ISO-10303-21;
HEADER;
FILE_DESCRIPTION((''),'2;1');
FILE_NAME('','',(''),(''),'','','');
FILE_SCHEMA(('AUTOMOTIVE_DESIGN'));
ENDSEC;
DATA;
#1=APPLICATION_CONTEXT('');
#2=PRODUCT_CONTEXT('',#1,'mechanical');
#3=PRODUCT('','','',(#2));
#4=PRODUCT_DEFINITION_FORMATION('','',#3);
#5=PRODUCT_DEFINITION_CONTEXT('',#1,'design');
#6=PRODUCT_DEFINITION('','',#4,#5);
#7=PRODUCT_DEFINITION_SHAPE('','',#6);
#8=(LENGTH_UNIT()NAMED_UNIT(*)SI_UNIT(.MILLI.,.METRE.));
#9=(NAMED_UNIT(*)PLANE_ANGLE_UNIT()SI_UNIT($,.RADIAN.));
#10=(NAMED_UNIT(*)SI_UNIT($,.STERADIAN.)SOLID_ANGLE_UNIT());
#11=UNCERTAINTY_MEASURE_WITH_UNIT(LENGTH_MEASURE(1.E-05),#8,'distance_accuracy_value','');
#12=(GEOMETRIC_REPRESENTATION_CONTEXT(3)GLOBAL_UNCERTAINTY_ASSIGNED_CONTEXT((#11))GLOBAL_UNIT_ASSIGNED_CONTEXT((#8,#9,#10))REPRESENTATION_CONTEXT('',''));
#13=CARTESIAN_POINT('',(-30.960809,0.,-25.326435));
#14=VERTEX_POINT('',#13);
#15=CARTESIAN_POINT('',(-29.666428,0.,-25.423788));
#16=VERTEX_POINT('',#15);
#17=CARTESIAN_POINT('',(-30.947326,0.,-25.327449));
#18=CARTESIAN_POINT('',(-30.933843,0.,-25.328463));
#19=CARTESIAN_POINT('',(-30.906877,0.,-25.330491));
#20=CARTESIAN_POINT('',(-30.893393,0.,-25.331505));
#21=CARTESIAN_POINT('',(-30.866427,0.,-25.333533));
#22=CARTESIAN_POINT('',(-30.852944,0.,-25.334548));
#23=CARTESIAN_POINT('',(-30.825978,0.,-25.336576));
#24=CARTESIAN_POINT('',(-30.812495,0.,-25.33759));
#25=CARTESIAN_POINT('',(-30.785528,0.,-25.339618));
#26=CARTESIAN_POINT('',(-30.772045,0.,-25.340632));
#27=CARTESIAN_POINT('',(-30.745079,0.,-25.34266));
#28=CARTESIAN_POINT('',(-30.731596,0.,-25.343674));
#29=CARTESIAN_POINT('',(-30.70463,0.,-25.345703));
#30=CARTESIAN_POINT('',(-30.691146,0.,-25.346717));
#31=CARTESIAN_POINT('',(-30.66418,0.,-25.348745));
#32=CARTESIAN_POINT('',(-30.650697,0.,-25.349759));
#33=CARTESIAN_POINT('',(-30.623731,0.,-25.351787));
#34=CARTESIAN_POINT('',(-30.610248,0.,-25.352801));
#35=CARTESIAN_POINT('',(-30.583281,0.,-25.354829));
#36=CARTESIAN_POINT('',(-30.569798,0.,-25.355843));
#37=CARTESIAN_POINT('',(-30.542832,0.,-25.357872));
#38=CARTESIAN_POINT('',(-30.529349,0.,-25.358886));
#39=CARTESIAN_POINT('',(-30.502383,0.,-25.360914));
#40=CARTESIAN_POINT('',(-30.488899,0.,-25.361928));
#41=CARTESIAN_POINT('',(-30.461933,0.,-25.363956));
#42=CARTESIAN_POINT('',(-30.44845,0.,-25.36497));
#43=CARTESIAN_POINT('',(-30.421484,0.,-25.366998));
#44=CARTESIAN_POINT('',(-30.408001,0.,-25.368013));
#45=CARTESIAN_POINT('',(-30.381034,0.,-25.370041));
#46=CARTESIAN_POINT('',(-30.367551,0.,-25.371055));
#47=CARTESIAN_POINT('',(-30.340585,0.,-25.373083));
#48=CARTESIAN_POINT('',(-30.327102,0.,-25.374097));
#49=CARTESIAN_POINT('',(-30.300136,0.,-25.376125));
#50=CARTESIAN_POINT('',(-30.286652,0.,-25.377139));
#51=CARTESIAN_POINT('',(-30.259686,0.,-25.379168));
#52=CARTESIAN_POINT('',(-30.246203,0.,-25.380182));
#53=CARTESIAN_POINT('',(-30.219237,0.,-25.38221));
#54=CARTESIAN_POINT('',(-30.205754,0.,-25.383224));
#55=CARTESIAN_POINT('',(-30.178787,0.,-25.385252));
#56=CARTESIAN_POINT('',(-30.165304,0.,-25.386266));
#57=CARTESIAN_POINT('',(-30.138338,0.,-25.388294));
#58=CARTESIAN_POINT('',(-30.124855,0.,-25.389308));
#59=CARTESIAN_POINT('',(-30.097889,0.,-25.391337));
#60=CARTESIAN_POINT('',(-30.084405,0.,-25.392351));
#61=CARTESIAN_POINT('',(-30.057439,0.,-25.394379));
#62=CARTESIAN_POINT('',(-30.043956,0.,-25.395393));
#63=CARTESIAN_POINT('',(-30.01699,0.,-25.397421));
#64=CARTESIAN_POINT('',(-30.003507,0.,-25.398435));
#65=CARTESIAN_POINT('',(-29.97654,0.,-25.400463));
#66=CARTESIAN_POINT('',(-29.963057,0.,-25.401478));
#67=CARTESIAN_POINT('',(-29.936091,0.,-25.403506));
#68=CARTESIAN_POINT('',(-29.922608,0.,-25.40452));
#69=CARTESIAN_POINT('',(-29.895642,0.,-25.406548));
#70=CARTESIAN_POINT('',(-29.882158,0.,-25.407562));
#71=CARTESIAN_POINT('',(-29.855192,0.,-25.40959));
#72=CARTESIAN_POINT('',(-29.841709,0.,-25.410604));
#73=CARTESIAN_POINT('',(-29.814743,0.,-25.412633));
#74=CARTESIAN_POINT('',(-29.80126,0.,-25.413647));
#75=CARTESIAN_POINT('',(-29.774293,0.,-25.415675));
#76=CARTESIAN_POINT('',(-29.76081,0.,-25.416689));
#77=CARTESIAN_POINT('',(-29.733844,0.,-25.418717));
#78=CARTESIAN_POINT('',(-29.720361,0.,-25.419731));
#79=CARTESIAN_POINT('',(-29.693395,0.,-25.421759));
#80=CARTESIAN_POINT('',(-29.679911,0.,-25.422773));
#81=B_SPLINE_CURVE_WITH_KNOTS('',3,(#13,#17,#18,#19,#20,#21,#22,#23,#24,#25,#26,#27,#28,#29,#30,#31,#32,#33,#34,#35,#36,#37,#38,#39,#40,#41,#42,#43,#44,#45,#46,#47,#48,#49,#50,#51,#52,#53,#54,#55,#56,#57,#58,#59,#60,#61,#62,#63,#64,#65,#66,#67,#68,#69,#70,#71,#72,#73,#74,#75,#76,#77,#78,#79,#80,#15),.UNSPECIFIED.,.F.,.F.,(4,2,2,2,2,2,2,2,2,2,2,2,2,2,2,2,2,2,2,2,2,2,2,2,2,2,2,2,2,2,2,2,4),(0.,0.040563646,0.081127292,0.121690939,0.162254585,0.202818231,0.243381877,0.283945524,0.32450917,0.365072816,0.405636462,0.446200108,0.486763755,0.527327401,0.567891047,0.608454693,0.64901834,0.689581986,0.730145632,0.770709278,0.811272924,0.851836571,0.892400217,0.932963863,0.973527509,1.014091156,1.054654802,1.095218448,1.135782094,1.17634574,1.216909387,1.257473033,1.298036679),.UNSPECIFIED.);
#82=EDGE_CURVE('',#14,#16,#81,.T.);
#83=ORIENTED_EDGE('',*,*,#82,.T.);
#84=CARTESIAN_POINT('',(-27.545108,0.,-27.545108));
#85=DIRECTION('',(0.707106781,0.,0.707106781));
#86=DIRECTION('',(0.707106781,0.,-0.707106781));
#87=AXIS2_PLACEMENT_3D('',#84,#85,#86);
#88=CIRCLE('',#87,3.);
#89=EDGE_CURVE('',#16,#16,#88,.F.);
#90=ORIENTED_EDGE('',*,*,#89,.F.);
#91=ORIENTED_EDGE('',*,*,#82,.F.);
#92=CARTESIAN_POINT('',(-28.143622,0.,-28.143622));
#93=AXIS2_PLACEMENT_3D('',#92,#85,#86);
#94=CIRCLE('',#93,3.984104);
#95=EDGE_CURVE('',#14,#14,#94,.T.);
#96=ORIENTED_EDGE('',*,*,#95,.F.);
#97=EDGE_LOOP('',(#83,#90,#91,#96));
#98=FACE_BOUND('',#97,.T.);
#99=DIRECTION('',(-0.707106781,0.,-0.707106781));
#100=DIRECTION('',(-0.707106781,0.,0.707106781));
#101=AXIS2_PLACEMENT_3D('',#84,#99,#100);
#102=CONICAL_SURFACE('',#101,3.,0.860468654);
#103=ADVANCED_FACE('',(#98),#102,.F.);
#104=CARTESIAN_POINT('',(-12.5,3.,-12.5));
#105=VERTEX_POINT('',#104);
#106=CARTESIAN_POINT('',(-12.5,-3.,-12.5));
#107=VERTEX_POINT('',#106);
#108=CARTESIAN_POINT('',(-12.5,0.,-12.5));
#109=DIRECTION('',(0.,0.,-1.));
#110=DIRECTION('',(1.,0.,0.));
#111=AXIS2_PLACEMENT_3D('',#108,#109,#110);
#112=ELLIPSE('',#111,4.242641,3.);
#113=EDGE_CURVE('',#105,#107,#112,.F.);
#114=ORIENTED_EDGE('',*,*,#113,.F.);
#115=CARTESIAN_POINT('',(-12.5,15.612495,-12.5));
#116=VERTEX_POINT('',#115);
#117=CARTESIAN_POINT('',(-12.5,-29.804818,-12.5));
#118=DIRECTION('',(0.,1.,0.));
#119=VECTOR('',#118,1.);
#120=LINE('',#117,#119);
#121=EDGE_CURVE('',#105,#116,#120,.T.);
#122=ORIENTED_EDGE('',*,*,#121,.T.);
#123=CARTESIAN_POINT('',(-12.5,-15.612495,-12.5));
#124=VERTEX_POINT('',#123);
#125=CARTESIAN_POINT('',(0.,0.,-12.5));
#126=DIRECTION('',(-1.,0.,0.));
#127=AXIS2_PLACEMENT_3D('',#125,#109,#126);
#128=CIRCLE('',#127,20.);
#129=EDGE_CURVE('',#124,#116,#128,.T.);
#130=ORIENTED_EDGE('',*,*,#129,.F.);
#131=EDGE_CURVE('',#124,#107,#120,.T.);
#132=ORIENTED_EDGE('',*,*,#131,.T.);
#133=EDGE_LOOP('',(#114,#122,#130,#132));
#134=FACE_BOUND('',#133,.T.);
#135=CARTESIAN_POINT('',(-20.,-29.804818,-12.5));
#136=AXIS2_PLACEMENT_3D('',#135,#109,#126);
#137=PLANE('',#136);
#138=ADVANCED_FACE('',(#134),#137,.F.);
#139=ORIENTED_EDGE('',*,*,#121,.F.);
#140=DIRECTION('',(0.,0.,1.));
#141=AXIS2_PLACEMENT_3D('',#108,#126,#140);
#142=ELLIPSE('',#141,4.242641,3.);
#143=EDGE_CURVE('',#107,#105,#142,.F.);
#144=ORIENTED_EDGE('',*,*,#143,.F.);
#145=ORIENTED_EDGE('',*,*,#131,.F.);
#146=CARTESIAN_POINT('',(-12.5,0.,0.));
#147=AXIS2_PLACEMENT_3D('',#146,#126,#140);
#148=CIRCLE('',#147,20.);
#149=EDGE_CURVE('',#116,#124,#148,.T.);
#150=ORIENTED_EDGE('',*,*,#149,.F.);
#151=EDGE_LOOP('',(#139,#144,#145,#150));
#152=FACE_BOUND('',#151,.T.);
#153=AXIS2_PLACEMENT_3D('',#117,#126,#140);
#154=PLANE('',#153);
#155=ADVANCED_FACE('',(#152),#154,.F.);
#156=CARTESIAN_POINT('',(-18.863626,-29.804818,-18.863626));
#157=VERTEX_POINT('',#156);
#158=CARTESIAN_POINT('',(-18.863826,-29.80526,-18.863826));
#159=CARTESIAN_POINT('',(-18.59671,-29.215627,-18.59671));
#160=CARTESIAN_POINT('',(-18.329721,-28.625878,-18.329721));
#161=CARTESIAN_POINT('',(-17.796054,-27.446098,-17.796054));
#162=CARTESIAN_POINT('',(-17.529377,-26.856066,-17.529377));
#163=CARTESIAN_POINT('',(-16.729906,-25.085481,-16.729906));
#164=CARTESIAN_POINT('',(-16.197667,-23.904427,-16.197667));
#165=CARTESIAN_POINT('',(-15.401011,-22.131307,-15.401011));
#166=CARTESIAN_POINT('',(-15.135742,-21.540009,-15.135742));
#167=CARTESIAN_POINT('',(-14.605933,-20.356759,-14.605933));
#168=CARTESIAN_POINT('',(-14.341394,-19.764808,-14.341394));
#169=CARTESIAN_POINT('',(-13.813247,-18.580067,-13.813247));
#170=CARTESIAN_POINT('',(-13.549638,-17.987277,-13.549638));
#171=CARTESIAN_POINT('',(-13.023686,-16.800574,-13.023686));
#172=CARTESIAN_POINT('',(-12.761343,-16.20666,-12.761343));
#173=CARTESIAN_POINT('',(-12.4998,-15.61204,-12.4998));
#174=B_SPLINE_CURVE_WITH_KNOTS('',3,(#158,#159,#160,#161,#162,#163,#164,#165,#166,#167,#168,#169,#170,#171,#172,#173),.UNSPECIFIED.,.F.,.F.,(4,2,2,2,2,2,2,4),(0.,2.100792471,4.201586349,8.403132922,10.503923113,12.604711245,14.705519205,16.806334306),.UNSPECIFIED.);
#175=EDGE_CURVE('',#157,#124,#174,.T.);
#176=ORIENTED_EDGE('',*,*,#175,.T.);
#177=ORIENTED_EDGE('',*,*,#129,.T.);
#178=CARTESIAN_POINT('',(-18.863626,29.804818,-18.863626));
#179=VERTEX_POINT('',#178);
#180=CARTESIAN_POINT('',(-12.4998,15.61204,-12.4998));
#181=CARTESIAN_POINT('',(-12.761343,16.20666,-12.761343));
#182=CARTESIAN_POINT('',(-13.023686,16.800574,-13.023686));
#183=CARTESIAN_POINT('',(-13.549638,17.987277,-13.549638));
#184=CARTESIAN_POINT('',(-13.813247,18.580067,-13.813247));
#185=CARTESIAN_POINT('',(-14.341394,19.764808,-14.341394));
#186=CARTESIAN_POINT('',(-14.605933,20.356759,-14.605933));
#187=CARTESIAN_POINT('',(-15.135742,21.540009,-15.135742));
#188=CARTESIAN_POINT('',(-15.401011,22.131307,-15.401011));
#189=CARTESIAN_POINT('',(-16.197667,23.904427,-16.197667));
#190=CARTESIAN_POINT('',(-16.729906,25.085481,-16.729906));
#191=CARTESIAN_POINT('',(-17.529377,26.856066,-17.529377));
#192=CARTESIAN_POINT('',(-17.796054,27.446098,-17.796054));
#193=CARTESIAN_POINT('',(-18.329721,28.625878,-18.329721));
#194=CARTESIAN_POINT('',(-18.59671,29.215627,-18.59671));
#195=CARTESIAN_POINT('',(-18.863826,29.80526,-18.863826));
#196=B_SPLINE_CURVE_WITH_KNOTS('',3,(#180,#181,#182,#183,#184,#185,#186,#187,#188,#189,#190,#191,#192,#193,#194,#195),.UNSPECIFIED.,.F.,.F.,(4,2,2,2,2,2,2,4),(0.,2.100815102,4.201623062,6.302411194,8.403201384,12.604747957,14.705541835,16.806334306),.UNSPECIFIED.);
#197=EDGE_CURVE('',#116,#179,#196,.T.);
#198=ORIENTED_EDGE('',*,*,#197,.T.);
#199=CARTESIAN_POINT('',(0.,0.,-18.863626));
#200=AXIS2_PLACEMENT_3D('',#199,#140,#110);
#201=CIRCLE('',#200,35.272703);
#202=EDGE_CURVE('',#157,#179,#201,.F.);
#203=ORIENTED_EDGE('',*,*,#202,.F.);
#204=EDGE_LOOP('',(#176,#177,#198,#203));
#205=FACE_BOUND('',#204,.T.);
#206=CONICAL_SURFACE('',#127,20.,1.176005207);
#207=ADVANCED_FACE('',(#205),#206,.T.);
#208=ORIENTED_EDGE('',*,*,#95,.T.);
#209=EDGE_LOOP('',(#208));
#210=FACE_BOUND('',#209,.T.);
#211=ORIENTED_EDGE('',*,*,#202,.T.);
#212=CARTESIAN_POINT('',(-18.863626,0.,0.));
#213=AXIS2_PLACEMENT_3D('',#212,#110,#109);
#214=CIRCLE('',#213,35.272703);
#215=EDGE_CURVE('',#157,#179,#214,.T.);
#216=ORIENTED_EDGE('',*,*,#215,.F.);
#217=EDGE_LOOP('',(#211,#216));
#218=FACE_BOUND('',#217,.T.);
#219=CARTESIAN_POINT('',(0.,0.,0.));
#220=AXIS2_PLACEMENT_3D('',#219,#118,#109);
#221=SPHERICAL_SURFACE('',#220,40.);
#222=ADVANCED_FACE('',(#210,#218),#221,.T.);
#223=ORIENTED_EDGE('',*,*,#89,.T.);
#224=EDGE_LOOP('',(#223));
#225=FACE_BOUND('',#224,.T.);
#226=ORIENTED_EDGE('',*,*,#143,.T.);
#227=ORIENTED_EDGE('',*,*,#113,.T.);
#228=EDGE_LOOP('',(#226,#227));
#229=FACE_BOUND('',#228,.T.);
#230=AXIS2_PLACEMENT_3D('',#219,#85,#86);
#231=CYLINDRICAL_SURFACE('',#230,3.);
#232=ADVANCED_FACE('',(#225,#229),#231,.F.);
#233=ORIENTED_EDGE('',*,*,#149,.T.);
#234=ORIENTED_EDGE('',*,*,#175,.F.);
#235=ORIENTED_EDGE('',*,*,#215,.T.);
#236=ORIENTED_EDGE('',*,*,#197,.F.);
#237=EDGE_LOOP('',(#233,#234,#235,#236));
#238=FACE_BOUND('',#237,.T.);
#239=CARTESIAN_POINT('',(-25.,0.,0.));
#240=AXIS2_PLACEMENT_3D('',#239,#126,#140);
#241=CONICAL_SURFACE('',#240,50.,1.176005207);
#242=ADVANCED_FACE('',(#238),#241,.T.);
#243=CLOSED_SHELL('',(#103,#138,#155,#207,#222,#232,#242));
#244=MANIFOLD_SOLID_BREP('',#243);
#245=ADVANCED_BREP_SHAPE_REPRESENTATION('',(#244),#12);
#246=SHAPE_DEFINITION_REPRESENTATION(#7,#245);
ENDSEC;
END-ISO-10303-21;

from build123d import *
from OCP.BRepAlgoAPI import BRepAlgoAPI_Cut
from OCP.TopTools import TopTools_ListOfShape

# Parameters (mm, degrees)
CUT_EXTRUDE_1_DEPTH      = 59.108987417
CUT_EXTRUDE_1_DEPTH_BACK = 59.108987417
CUT_EXTRUDE_2_DEPTH      = 59.108987417
CUT_EXTRUDE_2_DEPTH_BACK = 59.108987417
SKETCH_12_W              = 3
SKETCH_12_H              = 50.62024983


with BuildPart() as part:
    # 草图3 → 旋转1 (revolve)
    with BuildSketch(Plane(origin=(0, 0, 0), x_dir=(0, 0, -1), z_dir=(1, 0, 0))):
        with BuildLine():
            Line((0, 40), (0, -40))
            ThreePointArc((0, -40), (40, 0), (0, 40))
        make_face()
    revolve(axis=Axis((0, 40, 0), (0, -1, 0)))

    # 草图4 → 切除-旋转3 (revolve, cut)
    with BuildSketch(Plane.XY, mode=Mode.PRIVATE) as cut_revolve_3_sk:
        Polygon((-25, 50), (25, 50), (12.5, 20), (-12.5, 20), align=None)
    revolve(cut_revolve_3_sk.sketch.rotate(Axis((-55.247864245, 0, 0), (1, 0, 0)), 90), axis=Axis((-55.247864245, 0, 0), (1, 0, 0)), mode=Mode.SUBTRACT)


with BuildPart() as cut_revolve_4_tool:
    # 草图5 → 切除-旋转4 (revolve)
    with BuildSketch(Plane(origin=(0, 0, 0), x_dir=(1, 0, 0), z_dir=(0, 1, 0))):
        Polygon((-50, 25), (-50, -25), (-20, -12.5), (-20, 12.5), align=None)
    revolve(axis=Axis((0, 0, -44.002313129), (0, 0, 1)))


with BuildPart() as part_1:
    add(part.part)

    # 切除-旋转4: cut by cut_revolve_4_tool, with a tolerance
    cut_revolve_4_stock = TopTools_ListOfShape()
    cut_revolve_4_stock.Append(part_1.part.wrapped)
    cut_revolve_4_tools = TopTools_ListOfShape()
    cut_revolve_4_tools.Append(cut_revolve_4_tool.part.wrapped)
    cut_revolve_4_cut = BRepAlgoAPI_Cut()
    cut_revolve_4_cut.SetArguments(cut_revolve_4_stock)
    cut_revolve_4_cut.SetTools(cut_revolve_4_tools)
    cut_revolve_4_cut.SetFuzzyValue(0.00001)
    cut_revolve_4_cut.Build()
    add(Compound.cast(cut_revolve_4_cut.Shape()).solids(), mode=Mode.REPLACE)

    # 草图6 → 切除-拉伸1 (cut, two sides: drawn at the far end of the back side and taken through both)
    with BuildSketch(Plane(origin=(0, 0, 0), x_dir=(1, 0, 0), z_dir=(0, 1, 0)).offset(-CUT_EXTRUDE_1_DEPTH_BACK)):
        Polygon((-20, 12.5), (37.556288363, 12.5), (37.556288363, -29.25786606), (31.486585193, -38.646938151), (-34.426597666, -38.077903479), (-43.720830645, -12.186825895), align=None)
    extrude(amount=CUT_EXTRUDE_1_DEPTH + CUT_EXTRUDE_1_DEPTH_BACK, mode=Mode.SUBTRACT)

    # 草图7 → 切除-拉伸2 (cut, two sides: drawn at the far end of the back side and taken through both)
    with BuildSketch(Plane(origin=(0, 0, 0), x_dir=(1, 0, 0), z_dir=(0, 1, 0)).offset(-CUT_EXTRUDE_2_DEPTH_BACK)):
        Polygon((-12.5, 20), (-10.113298037, 50.085656358), (42.871589505, 47.227550391), (40.63466159, 5.758348279), (-0.879417221, -1.726674889), (-12.5, 12.5), align=None)
    extrude(amount=CUT_EXTRUDE_2_DEPTH + CUT_EXTRUDE_2_DEPTH_BACK, mode=Mode.SUBTRACT)

    # 草图12 → 切除-旋转7 (revolve, cut)
    with BuildSketch(Plane(origin=(0, 0, 0), x_dir=(0, 1, 0), z_dir=(0.7071067811865464, 0, -0.7071067811865488)), mode=Mode.PRIVATE) as cut_revolve_7_sk:
        with Locations((1.5, -25.310124915)):
            Rectangle(SKETCH_12_W, SKETCH_12_H)
    revolve(cut_revolve_7_sk.sketch.rotate(Axis((0, 0, 0), (-0.7071067811865488, 0, -0.7071067811865464)), 90), axis=Axis((0, 0, 0), (-0.7071067811865488, 0, -0.7071067811865464)), mode=Mode.SUBTRACT)

    # 倒角1
    # the kernel refuses this chamfer: 1, 0.93267614 mm, written as the material it takes off along each edge
    with BuildSketch(Plane(origin=(-28.204609567, 1e-09, -28.204609538), x_dir=(0.7071067811865464, -3.5887694896846076e-10, -0.7071067811865487), z_dir=(2.537647002539835e-10, 1.0, -2.537639482002908e-10))) as chamfer_1_piece_1:
        with BuildLine():
            Line((3.984104251, -0.086249492), (2.999999979, -0.932676176))
            Line((2.999999979, -0.932676176), (3.000000021, 0))
            ThreePointArc((3.000000021, 0), (3.506227368, -0.041308053), (3.984104251, -0.086249492))
        make_face()
    revolve(axis=Axis((-28.204609567, 1e-09, -28.204609538), (-0.7071067811865486, 0, -0.7071067811865465)), mode=Mode.SUBTRACT)


solid = part_1.part
